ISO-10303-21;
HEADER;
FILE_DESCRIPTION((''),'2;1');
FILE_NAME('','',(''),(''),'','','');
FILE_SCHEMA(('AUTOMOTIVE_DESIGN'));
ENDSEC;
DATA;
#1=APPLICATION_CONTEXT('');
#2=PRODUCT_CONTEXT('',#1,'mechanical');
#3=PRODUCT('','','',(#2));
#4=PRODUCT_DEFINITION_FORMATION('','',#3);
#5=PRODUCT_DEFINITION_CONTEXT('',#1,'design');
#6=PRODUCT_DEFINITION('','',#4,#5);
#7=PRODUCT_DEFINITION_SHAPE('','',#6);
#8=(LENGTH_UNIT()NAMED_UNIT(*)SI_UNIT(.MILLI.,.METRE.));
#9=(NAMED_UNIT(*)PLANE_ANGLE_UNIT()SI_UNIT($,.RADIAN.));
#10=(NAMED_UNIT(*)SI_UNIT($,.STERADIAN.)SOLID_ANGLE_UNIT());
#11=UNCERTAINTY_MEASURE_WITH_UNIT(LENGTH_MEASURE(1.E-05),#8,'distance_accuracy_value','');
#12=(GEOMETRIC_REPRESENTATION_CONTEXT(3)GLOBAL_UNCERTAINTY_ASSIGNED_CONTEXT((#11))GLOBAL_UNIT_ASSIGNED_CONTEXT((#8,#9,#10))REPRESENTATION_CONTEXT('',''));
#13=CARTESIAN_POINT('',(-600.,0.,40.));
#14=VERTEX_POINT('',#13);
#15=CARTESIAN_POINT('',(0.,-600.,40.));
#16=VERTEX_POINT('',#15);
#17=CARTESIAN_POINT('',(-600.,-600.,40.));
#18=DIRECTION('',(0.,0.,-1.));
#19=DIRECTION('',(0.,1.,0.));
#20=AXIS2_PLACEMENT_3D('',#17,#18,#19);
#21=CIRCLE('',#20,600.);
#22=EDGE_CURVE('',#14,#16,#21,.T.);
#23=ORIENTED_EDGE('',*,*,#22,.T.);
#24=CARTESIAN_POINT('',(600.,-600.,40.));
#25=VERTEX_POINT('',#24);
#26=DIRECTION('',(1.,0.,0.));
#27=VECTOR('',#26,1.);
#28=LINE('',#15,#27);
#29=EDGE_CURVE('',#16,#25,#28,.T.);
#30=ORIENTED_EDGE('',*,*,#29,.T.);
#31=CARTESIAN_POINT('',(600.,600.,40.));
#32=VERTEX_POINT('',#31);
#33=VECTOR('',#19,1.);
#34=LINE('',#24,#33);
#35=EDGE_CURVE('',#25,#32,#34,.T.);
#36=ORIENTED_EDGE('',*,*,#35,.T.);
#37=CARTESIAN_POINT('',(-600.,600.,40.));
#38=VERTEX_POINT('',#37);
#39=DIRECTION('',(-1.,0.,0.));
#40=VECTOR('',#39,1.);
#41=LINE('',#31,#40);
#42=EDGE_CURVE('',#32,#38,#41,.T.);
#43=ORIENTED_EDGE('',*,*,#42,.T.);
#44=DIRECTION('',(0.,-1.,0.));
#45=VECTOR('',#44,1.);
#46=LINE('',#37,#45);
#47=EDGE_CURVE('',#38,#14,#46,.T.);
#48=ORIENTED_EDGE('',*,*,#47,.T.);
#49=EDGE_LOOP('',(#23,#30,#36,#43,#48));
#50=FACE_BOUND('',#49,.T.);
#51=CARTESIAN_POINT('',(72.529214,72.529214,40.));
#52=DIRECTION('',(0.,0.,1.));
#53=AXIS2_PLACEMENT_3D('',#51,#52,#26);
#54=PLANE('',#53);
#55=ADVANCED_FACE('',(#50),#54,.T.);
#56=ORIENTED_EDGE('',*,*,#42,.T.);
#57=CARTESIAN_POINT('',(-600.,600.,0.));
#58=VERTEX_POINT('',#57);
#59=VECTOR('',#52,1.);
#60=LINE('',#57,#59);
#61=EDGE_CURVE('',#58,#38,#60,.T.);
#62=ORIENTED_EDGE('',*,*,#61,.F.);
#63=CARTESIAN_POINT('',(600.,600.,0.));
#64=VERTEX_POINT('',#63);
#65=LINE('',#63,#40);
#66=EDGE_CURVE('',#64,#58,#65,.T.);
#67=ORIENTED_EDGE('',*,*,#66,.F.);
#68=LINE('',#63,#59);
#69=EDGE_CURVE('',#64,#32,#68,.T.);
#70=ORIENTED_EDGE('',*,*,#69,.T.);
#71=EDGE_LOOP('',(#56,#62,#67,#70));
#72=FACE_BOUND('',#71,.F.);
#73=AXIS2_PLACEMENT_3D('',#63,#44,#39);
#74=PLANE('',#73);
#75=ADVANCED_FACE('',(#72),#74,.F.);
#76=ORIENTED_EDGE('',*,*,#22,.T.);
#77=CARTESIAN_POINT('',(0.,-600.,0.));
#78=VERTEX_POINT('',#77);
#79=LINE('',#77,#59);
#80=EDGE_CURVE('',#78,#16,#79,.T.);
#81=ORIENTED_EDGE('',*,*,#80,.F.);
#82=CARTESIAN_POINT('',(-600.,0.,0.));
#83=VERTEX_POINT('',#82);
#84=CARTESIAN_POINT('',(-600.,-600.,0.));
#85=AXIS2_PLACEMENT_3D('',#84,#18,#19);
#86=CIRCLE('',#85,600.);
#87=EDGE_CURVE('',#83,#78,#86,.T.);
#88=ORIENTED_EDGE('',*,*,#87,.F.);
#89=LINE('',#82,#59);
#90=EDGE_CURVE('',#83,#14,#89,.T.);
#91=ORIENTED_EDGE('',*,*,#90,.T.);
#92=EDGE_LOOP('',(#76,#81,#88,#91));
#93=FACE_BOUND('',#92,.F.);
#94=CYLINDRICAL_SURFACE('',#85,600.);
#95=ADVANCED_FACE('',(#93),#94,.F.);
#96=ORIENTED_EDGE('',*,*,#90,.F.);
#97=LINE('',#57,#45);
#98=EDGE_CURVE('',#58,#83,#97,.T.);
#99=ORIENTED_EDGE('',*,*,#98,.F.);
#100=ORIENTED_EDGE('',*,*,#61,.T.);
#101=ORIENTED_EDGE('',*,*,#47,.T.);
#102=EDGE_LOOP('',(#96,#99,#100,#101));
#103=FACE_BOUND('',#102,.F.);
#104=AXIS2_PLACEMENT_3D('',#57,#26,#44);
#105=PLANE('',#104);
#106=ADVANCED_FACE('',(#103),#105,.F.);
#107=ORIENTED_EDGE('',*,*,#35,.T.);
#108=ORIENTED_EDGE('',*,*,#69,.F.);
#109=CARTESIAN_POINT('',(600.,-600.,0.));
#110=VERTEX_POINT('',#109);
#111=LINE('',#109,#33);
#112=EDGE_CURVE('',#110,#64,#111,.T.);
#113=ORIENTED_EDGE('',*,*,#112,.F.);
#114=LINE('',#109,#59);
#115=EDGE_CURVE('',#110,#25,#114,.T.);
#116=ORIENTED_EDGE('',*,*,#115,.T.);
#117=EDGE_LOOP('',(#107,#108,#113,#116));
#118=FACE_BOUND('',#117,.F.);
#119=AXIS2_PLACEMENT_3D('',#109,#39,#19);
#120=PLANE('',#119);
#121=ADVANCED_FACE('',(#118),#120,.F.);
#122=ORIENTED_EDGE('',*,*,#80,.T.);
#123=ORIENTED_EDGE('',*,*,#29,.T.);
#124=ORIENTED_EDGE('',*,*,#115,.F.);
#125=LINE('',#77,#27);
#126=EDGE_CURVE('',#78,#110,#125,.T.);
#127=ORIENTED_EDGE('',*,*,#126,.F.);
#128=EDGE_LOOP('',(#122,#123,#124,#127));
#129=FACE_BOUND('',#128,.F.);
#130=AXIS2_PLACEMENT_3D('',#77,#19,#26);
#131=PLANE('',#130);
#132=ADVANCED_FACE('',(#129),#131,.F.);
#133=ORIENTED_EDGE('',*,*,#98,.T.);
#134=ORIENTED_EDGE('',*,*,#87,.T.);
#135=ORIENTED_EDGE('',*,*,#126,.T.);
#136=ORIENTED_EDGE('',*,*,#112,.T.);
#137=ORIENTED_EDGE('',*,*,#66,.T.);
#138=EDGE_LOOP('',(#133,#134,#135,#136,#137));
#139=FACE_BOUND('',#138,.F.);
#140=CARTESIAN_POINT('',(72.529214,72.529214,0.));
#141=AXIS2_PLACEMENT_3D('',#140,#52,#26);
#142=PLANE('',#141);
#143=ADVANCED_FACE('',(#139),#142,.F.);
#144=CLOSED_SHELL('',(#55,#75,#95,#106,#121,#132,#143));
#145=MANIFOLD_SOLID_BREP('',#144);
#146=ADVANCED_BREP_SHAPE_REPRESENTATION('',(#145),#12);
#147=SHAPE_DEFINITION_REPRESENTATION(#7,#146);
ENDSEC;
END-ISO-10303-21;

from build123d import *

# Parameters (mm, degrees)
F1_DEPTH = 40


# Not quite as in the source:
# - a feature names something its author has since deleted; it is built from what else it names


with BuildPart() as f1:
    # F0 (on Top) → F1 (new body)
    with BuildSketch(Plane.XY):
        with BuildLine():
            Line((0, -600), (600, -600))
            Line((600, -600), (600, 600))
            Line((600, 600), (-600, 600))
            Line((-600, 600), (-600, 0))
            ThreePointArc((-600, 0), (-175.7359312881, -175.7359312881), (0, -600))
        make_face()
    extrude(amount=F1_DEPTH)


solid = f1.part
